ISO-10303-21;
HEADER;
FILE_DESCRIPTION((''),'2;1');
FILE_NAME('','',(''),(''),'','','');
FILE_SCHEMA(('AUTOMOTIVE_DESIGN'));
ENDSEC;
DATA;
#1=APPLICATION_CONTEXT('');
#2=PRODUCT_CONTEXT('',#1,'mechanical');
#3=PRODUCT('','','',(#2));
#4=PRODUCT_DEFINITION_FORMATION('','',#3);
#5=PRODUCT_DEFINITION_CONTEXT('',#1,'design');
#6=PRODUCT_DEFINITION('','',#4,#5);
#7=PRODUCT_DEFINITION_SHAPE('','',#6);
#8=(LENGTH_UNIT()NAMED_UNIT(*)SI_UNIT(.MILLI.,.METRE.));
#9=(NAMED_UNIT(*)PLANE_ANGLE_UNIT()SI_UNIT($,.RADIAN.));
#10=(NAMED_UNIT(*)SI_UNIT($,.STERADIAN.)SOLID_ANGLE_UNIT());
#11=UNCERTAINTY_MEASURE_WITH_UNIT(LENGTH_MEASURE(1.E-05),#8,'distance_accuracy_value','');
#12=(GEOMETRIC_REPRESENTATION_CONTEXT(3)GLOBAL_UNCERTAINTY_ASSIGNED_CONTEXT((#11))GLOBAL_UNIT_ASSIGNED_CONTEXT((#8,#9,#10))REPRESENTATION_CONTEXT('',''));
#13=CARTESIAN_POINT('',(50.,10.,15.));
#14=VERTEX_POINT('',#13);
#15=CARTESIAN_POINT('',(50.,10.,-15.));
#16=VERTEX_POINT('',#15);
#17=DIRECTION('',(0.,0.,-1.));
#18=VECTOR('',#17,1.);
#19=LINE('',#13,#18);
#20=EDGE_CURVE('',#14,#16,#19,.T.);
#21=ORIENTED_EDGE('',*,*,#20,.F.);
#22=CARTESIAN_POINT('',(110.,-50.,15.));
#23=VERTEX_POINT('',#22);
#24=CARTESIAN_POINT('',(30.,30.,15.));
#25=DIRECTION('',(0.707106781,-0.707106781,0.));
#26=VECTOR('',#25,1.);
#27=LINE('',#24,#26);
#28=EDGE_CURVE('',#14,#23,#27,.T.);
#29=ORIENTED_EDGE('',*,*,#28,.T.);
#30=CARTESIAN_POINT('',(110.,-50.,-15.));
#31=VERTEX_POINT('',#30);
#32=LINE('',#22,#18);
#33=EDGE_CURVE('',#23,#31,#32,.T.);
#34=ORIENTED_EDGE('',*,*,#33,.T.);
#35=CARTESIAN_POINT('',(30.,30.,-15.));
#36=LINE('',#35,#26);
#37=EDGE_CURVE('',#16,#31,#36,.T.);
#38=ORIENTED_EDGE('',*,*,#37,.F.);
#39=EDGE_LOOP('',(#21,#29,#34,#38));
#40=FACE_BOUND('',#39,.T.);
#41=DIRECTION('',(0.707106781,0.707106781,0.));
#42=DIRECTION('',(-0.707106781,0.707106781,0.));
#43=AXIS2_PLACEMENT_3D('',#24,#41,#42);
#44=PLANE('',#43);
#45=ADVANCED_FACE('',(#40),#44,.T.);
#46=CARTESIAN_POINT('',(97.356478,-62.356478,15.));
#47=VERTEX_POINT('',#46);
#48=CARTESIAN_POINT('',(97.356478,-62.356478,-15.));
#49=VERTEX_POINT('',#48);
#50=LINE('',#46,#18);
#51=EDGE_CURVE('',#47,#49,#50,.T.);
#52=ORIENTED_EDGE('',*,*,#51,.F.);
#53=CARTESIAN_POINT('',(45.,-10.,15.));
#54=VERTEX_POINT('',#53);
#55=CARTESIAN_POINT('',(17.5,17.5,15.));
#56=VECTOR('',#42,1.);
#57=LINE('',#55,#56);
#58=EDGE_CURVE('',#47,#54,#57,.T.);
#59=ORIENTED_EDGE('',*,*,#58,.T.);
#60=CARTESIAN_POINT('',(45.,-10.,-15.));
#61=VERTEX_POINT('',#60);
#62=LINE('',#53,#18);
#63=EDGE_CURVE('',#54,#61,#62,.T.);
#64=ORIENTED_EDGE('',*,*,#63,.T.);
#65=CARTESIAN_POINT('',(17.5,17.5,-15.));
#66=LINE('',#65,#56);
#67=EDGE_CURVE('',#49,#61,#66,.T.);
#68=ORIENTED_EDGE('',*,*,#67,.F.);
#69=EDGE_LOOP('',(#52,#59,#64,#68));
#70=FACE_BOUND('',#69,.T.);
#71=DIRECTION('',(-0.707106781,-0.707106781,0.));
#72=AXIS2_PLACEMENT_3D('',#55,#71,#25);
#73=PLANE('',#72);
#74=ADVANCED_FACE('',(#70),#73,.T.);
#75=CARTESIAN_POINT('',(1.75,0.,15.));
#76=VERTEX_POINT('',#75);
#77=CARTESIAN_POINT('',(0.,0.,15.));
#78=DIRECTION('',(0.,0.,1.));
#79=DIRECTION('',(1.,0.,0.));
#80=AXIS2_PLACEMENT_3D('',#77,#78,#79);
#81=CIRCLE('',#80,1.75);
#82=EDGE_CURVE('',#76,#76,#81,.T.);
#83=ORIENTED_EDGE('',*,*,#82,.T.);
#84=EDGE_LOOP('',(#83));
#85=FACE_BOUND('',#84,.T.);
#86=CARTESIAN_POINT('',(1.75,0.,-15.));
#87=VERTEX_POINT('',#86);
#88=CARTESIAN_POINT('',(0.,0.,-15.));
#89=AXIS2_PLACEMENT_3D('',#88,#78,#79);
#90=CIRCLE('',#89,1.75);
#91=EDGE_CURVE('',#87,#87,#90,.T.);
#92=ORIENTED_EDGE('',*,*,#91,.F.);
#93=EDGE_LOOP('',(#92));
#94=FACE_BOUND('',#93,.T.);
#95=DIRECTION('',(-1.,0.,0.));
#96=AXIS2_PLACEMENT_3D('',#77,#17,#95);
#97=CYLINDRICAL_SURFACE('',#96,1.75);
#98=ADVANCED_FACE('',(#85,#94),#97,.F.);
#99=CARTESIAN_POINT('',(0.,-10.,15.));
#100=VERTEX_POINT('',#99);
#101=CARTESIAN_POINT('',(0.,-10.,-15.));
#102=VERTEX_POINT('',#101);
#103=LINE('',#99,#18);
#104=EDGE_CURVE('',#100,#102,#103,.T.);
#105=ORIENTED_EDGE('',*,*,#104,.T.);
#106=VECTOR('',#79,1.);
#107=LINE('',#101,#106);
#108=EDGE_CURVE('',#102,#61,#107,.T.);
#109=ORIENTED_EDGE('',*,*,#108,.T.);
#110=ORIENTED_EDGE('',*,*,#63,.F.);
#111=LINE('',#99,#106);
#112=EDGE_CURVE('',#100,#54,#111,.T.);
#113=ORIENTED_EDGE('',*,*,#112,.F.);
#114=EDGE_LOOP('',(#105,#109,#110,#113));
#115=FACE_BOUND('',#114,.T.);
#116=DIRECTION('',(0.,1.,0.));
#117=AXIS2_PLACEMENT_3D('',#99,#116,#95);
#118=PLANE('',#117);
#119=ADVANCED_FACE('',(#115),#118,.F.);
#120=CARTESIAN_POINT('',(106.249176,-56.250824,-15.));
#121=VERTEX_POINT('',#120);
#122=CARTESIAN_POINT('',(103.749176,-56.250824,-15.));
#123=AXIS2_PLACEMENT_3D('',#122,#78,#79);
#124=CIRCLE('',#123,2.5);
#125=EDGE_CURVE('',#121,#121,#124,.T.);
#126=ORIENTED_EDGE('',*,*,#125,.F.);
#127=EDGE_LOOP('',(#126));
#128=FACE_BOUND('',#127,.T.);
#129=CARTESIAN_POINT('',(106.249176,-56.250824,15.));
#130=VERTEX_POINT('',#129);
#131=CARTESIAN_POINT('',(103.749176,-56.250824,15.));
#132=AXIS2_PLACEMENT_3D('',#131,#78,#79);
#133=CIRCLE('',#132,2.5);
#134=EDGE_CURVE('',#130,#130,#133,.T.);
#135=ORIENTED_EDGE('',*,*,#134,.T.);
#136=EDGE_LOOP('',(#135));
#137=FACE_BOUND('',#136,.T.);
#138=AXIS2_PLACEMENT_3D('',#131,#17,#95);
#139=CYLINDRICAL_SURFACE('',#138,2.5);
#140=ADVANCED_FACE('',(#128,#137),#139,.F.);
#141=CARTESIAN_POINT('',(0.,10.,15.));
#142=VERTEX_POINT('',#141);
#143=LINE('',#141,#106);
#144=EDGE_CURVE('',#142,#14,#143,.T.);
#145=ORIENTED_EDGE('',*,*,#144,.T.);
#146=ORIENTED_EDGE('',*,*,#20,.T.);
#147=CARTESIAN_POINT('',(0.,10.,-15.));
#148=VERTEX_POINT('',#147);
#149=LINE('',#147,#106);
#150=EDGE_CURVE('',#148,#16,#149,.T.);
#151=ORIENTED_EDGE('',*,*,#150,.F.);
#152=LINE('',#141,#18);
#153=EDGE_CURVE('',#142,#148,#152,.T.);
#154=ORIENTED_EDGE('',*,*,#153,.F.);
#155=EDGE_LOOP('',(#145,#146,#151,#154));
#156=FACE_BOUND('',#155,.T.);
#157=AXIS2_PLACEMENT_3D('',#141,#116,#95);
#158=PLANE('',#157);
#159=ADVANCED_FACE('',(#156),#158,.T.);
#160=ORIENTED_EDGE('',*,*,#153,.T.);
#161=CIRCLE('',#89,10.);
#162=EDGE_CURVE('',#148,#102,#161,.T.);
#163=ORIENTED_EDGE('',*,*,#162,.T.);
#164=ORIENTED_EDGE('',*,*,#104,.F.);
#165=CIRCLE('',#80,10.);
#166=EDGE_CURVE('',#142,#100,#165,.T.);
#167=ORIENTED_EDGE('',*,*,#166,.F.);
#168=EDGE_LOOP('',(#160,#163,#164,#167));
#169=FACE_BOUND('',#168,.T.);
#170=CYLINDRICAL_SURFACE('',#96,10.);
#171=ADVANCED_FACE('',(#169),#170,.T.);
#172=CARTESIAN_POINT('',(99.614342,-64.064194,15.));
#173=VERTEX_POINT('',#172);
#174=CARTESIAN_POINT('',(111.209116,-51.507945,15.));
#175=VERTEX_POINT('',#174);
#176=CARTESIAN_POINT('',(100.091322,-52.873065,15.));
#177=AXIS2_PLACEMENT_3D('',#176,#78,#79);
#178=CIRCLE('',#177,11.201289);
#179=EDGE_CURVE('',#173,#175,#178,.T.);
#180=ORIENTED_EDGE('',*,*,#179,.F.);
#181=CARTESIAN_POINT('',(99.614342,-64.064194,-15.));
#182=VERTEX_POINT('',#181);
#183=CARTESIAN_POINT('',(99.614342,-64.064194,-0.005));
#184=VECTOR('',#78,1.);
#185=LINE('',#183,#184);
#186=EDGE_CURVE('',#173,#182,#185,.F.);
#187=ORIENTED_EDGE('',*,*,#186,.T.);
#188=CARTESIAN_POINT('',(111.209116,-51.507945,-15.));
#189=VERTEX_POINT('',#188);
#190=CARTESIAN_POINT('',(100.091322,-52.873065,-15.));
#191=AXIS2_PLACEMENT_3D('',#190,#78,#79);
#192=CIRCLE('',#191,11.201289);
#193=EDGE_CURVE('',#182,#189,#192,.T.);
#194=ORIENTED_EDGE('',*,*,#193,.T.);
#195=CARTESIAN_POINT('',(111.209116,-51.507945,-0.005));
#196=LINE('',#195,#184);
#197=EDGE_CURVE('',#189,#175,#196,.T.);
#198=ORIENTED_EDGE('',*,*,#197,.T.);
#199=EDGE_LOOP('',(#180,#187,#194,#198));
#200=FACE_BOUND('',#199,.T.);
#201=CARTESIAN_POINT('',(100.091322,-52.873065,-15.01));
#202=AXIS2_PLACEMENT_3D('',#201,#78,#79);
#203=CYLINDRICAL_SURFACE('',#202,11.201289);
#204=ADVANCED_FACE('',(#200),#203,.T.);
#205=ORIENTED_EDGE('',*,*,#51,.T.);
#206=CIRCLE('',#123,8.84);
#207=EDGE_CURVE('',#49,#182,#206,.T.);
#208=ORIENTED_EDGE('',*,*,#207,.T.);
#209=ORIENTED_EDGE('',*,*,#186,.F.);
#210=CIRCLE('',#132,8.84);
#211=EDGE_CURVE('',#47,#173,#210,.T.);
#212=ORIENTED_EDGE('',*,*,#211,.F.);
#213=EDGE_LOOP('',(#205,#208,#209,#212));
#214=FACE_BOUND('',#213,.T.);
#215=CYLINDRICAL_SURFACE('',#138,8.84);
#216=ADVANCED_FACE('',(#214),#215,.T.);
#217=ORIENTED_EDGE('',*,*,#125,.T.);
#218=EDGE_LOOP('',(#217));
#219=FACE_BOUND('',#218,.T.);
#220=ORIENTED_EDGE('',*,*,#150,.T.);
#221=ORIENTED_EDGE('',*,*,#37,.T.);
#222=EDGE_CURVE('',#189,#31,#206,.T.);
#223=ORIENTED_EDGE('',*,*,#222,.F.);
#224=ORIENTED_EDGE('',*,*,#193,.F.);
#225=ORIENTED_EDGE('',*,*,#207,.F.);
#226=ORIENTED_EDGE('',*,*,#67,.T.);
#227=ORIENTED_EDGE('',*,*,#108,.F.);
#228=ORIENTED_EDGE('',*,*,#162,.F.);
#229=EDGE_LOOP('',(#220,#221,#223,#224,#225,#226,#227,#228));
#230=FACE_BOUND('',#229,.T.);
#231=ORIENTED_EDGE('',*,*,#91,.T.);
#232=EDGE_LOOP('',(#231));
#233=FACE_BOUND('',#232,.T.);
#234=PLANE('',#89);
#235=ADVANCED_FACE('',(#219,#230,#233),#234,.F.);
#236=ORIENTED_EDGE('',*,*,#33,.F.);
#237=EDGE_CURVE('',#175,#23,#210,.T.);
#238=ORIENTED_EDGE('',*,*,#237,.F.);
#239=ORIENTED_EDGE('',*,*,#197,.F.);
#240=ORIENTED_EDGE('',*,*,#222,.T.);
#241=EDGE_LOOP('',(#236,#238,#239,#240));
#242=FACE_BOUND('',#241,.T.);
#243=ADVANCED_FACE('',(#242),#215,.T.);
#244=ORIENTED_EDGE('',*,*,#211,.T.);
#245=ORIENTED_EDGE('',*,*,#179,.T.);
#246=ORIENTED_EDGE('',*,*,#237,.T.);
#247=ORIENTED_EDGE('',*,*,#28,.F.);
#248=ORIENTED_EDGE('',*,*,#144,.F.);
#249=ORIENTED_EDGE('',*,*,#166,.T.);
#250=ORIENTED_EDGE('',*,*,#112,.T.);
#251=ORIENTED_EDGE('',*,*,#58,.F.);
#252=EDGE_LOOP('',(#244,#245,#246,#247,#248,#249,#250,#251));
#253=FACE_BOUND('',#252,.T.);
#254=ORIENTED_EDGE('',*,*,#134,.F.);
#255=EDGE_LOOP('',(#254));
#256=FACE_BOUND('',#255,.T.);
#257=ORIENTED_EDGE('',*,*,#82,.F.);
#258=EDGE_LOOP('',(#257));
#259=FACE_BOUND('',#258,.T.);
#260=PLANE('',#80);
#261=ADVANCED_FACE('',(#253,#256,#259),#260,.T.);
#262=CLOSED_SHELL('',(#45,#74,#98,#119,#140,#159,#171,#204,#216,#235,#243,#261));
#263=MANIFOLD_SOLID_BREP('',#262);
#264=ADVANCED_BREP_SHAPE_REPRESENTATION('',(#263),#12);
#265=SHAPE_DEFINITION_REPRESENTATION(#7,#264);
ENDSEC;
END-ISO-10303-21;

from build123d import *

# Parameters (mm, degrees)
SKETCH2_R           = 1.75
SKETCH2_R_2         = 2.5
BOSS_EXTRUDE1_DEPTH = 15
SPLIT1_START        = -15
SPLIT1_DEPTH        = 30


# Read off the part's stored shape, not the designer's step: Split1
with BuildPart() as part:
    # Sketch2 → Boss-Extrude1 (new, symmetric)
    with BuildSketch(Plane.XY):
        with BuildLine():
            Line((0, 10), (50, 10))
            Line((50, 10), (110, -50))
            ThreePointArc((110, -50), (109.927822148, -62.57300177), (97.356477729, -62.356477729))
            Line((97.356477729, -62.356477729), (45, -10))
            Line((45, -10), (0, -10))
            ThreePointArc((0, -10), (-10, 0), (0, 10))
        make_face()
        Circle(SKETCH2_R, mode=Mode.SUBTRACT)
        with Locations((103.749176054, -56.250823946)):
            Circle(SKETCH2_R_2, mode=Mode.SUBTRACT)
    extrude(amount=BOSS_EXTRUDE1_DEPTH, both=True)

    # Split1 outline → Split1 (cut)
    with BuildSketch(Plane.XY.offset(SPLIT1_START)):
        with BuildLine():
            ThreePointArc((111.20911577, -51.507945133), (108.320634217, -60.472229721), (99.61434242, -64.06419395))
            ThreePointArc((99.61434242, -64.06419395), (110.24370673, -62.248045911), (111.20911577, -51.507945133))
        make_face()
    extrude(amount=SPLIT1_DEPTH, mode=Mode.SUBTRACT)


solid = part.part
